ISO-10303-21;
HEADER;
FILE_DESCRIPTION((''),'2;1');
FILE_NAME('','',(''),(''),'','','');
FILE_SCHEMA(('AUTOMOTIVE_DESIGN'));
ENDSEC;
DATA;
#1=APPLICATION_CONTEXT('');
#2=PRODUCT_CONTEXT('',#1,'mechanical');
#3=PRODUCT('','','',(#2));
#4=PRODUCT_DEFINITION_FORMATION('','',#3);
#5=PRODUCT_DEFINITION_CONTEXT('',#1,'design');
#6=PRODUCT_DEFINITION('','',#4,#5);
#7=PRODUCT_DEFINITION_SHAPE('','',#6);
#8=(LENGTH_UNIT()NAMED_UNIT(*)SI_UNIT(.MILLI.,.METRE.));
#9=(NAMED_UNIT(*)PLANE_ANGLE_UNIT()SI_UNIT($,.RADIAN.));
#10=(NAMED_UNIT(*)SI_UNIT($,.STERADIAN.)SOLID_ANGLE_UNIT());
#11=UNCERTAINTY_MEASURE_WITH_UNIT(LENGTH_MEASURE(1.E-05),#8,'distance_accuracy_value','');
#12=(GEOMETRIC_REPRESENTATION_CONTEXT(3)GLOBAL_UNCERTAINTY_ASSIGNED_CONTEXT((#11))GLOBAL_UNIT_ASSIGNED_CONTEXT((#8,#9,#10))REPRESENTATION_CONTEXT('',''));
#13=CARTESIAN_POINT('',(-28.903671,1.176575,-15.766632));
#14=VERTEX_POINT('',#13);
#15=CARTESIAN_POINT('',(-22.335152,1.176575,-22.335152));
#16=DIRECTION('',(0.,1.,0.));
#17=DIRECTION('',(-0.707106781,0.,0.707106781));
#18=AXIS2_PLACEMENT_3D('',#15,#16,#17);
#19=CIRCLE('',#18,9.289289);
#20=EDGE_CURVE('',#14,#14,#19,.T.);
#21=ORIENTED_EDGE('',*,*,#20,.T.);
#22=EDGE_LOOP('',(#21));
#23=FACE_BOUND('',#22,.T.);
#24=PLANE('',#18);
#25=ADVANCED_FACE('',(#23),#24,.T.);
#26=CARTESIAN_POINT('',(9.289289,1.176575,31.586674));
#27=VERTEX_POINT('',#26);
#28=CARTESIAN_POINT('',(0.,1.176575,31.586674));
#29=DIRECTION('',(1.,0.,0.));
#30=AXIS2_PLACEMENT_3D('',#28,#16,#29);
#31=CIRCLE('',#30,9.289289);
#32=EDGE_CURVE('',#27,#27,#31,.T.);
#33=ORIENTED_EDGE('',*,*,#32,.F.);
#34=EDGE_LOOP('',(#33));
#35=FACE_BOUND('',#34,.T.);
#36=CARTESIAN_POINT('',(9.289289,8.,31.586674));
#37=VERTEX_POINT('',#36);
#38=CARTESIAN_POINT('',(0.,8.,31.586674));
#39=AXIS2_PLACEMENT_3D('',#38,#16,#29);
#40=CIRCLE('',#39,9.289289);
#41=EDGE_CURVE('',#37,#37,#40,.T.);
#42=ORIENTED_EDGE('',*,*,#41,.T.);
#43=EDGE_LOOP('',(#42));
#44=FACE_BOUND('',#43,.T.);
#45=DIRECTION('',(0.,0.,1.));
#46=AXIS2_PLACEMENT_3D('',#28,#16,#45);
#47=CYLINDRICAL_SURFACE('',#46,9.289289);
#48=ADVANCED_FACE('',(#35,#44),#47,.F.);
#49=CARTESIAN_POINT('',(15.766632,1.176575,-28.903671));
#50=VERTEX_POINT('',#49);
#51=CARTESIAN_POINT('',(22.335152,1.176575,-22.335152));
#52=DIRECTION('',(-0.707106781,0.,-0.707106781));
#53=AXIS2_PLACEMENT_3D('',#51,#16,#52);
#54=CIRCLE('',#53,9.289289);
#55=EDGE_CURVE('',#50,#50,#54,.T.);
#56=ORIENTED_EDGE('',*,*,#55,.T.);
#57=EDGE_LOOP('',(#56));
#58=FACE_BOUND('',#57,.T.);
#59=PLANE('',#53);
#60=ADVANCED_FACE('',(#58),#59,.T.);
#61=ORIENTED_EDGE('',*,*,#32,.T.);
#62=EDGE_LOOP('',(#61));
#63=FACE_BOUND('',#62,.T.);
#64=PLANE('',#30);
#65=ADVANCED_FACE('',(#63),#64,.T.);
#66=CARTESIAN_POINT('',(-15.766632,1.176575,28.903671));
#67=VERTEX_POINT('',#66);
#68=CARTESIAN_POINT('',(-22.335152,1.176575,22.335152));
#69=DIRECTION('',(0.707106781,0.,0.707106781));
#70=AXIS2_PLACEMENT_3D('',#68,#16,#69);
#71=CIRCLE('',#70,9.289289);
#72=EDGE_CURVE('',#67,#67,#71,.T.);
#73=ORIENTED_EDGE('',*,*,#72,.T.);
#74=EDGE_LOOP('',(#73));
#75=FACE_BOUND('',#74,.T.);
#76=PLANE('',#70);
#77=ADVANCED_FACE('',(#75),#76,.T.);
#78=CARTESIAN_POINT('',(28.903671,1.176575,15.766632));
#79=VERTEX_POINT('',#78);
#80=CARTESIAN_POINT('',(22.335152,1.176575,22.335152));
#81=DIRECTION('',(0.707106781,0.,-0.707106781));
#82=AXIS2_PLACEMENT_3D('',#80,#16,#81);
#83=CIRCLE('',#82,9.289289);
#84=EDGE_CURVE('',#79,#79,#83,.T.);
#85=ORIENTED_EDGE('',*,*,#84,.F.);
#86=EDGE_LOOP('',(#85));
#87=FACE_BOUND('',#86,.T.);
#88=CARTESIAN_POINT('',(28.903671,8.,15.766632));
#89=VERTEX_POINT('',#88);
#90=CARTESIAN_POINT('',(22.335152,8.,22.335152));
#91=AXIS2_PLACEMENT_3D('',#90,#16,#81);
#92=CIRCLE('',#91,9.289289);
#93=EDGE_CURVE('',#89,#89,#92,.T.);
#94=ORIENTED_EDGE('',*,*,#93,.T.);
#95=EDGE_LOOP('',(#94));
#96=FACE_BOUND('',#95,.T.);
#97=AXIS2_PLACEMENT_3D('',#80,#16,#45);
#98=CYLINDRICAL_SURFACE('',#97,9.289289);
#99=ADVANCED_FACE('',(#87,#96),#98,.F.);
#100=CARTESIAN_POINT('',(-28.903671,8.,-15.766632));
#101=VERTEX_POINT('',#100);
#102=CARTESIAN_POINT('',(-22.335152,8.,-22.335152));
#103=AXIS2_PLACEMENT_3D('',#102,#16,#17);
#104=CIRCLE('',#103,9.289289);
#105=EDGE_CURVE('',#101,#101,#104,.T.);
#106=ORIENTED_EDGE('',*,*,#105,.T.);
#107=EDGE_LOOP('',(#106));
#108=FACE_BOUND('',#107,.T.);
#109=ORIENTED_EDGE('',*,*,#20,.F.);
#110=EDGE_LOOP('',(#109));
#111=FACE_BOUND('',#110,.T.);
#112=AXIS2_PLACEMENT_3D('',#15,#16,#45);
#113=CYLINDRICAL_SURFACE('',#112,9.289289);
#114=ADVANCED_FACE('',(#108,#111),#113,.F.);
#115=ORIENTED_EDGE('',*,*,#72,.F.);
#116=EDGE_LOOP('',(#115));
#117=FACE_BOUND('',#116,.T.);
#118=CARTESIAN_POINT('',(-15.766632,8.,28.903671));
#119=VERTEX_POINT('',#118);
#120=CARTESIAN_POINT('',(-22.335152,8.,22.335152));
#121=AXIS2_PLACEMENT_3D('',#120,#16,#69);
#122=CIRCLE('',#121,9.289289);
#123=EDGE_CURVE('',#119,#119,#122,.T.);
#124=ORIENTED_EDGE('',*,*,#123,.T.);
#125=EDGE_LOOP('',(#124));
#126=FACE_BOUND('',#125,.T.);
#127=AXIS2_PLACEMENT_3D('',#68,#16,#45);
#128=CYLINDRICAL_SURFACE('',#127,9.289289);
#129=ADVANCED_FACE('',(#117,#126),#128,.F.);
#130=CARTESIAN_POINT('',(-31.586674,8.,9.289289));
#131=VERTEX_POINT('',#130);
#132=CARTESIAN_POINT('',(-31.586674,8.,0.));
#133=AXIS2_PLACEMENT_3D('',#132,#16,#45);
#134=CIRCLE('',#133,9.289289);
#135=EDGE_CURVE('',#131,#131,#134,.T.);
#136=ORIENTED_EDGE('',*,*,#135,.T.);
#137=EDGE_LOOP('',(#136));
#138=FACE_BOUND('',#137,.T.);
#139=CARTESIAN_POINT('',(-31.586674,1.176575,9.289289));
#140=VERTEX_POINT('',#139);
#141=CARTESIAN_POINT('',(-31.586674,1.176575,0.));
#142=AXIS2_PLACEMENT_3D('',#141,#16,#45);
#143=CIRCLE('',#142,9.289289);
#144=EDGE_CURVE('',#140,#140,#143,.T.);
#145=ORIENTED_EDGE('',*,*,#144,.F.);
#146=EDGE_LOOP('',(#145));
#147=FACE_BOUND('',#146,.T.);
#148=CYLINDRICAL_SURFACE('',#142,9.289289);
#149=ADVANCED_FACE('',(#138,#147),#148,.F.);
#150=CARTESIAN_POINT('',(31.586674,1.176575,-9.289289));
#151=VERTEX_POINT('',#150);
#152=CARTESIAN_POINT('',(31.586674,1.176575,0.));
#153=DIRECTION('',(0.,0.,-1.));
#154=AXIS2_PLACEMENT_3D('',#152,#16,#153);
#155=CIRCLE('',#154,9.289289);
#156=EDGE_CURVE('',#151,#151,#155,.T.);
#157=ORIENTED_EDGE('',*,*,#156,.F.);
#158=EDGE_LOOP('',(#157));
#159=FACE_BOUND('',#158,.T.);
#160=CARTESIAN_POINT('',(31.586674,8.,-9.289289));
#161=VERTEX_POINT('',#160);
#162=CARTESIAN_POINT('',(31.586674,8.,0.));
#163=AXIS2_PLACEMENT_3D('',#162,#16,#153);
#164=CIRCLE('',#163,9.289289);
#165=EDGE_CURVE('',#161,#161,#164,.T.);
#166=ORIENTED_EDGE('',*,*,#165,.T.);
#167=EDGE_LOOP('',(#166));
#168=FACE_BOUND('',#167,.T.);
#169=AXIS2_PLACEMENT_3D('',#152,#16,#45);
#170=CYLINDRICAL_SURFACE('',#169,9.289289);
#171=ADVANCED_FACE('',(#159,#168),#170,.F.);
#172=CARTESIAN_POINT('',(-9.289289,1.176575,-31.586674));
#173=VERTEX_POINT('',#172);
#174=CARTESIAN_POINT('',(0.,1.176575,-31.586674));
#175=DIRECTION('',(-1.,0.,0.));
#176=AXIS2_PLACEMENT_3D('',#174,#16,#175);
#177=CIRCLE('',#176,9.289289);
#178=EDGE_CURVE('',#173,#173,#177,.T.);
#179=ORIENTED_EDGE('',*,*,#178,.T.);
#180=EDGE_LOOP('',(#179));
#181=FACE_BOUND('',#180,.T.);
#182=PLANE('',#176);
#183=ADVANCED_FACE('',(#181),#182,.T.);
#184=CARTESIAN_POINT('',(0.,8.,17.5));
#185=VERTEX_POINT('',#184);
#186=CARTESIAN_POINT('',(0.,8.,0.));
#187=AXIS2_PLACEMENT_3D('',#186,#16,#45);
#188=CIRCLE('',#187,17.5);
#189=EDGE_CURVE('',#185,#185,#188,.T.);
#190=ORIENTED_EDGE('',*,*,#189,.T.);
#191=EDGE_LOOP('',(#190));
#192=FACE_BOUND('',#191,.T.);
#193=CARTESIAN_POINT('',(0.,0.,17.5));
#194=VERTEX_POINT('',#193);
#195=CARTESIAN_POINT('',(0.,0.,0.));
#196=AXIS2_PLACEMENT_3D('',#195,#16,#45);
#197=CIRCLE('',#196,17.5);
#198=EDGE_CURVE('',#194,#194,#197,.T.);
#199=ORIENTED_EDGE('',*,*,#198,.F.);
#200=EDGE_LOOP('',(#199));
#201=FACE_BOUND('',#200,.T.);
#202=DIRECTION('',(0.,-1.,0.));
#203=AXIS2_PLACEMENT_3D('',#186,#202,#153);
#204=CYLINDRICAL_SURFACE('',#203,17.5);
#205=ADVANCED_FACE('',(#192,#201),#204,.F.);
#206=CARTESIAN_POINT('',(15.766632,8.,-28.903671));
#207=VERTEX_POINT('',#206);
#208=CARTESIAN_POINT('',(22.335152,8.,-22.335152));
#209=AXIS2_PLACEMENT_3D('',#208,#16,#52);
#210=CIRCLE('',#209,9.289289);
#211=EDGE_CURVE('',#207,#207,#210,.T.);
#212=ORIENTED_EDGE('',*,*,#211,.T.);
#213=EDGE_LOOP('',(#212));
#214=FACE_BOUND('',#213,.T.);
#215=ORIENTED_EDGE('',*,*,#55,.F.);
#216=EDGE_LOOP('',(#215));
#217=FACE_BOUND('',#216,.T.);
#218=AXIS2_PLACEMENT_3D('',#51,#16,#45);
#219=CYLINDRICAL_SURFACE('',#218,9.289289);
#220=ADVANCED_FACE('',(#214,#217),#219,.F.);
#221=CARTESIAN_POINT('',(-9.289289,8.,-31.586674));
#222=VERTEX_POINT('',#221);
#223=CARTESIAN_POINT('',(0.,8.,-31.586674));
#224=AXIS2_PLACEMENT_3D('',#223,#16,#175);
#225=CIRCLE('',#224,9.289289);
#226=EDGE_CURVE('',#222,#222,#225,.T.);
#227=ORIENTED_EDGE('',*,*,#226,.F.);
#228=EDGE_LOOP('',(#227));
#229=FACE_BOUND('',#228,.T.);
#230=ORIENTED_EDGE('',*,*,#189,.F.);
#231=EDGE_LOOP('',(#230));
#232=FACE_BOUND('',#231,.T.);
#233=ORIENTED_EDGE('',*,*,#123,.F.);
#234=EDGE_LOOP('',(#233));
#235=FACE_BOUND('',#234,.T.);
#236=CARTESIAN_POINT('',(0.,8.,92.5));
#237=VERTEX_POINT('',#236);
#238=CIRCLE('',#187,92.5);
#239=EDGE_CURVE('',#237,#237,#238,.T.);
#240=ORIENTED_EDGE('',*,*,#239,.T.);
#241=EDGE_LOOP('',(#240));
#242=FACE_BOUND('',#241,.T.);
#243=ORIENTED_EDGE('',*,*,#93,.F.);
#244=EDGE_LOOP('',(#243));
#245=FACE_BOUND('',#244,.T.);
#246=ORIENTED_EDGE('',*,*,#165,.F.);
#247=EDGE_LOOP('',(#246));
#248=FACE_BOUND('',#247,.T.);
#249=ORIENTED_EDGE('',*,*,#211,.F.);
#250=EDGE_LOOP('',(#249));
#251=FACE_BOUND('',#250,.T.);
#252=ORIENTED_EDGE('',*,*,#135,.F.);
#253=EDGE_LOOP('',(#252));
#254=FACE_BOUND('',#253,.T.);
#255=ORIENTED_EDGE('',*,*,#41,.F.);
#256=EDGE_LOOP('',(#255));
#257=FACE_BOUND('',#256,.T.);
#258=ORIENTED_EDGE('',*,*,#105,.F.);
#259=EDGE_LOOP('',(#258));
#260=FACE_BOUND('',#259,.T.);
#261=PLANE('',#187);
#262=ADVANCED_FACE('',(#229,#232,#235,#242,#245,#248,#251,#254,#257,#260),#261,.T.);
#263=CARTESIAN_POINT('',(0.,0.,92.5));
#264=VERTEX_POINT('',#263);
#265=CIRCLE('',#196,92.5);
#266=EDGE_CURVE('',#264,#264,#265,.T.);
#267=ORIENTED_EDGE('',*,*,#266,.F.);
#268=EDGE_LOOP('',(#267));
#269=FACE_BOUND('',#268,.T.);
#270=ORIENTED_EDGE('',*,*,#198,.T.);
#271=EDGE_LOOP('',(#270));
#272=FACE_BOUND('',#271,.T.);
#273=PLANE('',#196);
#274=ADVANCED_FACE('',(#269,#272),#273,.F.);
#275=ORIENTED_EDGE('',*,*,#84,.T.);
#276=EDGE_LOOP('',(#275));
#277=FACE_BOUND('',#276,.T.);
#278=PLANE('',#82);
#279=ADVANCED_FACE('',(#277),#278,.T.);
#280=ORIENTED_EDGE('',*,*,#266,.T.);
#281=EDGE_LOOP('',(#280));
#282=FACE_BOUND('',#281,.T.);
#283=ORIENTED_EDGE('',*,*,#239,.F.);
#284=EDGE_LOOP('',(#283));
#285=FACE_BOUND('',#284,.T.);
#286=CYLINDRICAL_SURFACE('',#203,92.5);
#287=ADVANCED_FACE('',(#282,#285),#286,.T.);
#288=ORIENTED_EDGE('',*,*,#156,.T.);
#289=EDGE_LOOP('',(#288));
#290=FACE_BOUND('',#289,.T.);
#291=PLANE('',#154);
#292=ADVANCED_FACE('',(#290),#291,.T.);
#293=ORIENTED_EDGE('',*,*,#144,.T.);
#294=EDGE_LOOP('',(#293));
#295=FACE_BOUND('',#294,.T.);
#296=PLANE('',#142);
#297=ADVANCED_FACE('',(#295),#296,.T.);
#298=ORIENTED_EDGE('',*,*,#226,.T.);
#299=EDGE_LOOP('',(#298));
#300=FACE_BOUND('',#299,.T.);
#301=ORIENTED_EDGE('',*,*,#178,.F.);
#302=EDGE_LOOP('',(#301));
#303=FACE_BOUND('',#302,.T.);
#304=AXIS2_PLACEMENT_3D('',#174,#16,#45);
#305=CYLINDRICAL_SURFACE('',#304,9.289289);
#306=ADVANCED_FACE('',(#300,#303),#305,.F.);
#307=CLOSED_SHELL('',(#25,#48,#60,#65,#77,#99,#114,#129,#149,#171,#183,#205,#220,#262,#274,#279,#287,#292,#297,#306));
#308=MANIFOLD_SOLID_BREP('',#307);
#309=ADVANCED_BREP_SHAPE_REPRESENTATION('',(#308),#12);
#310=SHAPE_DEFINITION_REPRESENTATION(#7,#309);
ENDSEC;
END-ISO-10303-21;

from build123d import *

# Parameters (mm, degrees)
SKETCH1_R           = 92.5
BOSS_EXTRUDE1_DEPTH = 8
SKETCH2_R           = 17.5
CUT_EXTRUDE1_DEPTH  = 132.059146953
SKETCH3_R           = 9.289288959
CUT_EXTRUDE2_DEPTH  = 6.823425341
CIRPATTERN1_COUNT   = 8


with BuildPart() as part:
    # Sketch1 → Boss-Extrude1 (new body)
    with BuildSketch(Plane(origin=(0, 0, 0), x_dir=(1, 0, 0), z_dir=(0, 1, 0))):
        Circle(SKETCH1_R)
    extrude(amount=BOSS_EXTRUDE1_DEPTH)

    # Sketch2 → Cut-Extrude1 (cut, through all)
    with BuildSketch(Plane(origin=(0, 0, 0), x_dir=(1, 0, 0), z_dir=(0, 1, 0))):
        Circle(SKETCH2_R)
    extrude(amount=CUT_EXTRUDE1_DEPTH, mode=Mode.SUBTRACT)

    # Sketch3 → Cut-Extrude2 (cut)
    with BuildSketch(Plane(origin=(0, 8, 0), x_dir=(1, 0, 0), z_dir=(0, 1, 0))):
        with Locations((-31.58667417, 0)):
            Circle(SKETCH3_R)
    cut_extrude2 = extrude(amount=-CUT_EXTRUDE2_DEPTH, mode=Mode.SUBTRACT)

    # CirPattern1: Cut-Extrude2 ×8 about axis
    cirpattern1_axis = Axis((0, 0, 0), (0, 1, 0))
    for i in range(1, CIRPATTERN1_COUNT):
        add(cut_extrude2.rotate(cirpattern1_axis, i * 360 / CIRPATTERN1_COUNT), mode=Mode.SUBTRACT)


solid = part.part
